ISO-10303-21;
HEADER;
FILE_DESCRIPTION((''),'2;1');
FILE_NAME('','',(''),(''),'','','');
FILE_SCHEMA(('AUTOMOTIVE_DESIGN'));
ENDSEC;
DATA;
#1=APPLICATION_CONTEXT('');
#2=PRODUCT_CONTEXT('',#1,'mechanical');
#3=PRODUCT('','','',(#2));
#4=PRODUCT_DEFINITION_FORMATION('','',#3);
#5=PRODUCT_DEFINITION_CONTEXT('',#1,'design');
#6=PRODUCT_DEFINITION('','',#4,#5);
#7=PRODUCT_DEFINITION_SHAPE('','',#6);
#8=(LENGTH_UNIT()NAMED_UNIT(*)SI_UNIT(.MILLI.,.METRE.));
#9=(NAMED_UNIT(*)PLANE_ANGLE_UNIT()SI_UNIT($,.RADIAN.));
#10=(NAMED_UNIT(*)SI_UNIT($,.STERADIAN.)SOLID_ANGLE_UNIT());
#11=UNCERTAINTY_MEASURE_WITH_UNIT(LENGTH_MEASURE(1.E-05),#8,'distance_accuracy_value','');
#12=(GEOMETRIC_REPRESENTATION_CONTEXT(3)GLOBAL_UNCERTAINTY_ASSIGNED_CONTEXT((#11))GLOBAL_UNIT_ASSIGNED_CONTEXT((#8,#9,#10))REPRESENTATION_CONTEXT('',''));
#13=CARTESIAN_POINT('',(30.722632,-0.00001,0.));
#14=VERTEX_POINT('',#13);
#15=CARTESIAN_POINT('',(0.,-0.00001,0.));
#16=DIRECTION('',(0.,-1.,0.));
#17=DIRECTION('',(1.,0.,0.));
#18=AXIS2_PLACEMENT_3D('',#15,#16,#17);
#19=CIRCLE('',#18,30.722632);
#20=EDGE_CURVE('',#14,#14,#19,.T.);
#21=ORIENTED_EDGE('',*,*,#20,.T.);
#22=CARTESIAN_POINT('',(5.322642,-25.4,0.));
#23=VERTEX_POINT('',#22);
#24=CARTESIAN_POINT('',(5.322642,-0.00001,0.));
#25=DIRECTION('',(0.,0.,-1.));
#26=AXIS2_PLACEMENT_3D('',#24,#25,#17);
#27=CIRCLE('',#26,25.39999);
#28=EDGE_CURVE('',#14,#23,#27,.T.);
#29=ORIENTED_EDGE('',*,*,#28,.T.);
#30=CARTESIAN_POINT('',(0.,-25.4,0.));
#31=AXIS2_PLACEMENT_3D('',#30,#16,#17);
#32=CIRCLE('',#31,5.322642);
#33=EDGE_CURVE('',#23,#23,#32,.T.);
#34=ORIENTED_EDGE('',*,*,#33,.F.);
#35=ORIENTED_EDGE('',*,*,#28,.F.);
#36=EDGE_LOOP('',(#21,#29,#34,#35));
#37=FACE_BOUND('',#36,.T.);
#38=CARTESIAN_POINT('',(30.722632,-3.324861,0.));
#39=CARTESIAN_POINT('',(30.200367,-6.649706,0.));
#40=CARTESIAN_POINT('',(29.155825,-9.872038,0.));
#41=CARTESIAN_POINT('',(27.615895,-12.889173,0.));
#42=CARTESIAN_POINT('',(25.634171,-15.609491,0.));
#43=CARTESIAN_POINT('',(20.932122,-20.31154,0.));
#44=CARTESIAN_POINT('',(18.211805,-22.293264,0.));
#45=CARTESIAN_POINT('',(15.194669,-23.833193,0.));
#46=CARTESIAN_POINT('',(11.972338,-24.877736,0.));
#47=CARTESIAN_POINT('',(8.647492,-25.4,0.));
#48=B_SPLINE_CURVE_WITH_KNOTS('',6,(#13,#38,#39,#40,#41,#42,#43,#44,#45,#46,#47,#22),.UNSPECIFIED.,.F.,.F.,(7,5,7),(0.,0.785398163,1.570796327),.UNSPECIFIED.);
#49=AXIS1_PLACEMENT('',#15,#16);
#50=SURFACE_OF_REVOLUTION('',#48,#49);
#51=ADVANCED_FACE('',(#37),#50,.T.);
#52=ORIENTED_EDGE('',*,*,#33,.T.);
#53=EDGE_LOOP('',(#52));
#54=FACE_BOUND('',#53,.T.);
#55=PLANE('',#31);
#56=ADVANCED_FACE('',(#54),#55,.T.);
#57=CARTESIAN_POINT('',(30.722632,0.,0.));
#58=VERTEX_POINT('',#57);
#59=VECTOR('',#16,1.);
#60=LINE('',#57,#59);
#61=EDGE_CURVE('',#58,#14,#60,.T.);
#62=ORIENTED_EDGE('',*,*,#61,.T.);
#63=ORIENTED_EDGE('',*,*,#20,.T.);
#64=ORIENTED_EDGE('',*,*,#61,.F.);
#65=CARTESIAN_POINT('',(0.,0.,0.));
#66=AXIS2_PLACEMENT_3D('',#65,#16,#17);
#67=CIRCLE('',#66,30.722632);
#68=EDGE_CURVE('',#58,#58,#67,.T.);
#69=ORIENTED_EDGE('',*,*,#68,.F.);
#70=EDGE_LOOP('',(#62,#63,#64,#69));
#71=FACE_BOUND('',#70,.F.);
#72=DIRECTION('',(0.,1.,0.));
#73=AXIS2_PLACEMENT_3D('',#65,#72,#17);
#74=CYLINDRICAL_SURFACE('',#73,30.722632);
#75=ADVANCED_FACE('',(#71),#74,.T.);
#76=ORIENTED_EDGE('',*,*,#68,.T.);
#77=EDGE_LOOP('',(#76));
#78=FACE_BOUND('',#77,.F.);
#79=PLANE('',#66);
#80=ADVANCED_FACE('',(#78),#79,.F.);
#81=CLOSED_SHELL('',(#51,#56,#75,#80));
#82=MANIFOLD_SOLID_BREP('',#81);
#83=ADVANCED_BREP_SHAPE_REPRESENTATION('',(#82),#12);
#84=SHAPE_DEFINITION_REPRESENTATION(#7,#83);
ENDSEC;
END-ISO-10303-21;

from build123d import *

# Parameters (mm, degrees)
F0_R     = 30.7226315835
F1_DEPTH = 25.4
F2_R     = 25.39999


# Not quite as in the source:
# - a fillet or chamfer is up to 0.001 mm smaller than in the source, because OpenCascade refuses the exact size


with BuildPart() as f1:
    # F0 (on Front) → F1 (new body)
    with BuildSketch(Plane.XZ):
        Circle(F0_R)
    extrude(amount=F1_DEPTH)

    # F2 (radius 25.4 in the source; OpenCascade refuses exactly that, so slightly less here)
    f2_edges = [f1.edges().sort_by_distance(p)[0] for p in [
        (-30.722632, -25.4, 0),
    ]]
    fillet(f2_edges, radius=F2_R)


solid = f1.part
